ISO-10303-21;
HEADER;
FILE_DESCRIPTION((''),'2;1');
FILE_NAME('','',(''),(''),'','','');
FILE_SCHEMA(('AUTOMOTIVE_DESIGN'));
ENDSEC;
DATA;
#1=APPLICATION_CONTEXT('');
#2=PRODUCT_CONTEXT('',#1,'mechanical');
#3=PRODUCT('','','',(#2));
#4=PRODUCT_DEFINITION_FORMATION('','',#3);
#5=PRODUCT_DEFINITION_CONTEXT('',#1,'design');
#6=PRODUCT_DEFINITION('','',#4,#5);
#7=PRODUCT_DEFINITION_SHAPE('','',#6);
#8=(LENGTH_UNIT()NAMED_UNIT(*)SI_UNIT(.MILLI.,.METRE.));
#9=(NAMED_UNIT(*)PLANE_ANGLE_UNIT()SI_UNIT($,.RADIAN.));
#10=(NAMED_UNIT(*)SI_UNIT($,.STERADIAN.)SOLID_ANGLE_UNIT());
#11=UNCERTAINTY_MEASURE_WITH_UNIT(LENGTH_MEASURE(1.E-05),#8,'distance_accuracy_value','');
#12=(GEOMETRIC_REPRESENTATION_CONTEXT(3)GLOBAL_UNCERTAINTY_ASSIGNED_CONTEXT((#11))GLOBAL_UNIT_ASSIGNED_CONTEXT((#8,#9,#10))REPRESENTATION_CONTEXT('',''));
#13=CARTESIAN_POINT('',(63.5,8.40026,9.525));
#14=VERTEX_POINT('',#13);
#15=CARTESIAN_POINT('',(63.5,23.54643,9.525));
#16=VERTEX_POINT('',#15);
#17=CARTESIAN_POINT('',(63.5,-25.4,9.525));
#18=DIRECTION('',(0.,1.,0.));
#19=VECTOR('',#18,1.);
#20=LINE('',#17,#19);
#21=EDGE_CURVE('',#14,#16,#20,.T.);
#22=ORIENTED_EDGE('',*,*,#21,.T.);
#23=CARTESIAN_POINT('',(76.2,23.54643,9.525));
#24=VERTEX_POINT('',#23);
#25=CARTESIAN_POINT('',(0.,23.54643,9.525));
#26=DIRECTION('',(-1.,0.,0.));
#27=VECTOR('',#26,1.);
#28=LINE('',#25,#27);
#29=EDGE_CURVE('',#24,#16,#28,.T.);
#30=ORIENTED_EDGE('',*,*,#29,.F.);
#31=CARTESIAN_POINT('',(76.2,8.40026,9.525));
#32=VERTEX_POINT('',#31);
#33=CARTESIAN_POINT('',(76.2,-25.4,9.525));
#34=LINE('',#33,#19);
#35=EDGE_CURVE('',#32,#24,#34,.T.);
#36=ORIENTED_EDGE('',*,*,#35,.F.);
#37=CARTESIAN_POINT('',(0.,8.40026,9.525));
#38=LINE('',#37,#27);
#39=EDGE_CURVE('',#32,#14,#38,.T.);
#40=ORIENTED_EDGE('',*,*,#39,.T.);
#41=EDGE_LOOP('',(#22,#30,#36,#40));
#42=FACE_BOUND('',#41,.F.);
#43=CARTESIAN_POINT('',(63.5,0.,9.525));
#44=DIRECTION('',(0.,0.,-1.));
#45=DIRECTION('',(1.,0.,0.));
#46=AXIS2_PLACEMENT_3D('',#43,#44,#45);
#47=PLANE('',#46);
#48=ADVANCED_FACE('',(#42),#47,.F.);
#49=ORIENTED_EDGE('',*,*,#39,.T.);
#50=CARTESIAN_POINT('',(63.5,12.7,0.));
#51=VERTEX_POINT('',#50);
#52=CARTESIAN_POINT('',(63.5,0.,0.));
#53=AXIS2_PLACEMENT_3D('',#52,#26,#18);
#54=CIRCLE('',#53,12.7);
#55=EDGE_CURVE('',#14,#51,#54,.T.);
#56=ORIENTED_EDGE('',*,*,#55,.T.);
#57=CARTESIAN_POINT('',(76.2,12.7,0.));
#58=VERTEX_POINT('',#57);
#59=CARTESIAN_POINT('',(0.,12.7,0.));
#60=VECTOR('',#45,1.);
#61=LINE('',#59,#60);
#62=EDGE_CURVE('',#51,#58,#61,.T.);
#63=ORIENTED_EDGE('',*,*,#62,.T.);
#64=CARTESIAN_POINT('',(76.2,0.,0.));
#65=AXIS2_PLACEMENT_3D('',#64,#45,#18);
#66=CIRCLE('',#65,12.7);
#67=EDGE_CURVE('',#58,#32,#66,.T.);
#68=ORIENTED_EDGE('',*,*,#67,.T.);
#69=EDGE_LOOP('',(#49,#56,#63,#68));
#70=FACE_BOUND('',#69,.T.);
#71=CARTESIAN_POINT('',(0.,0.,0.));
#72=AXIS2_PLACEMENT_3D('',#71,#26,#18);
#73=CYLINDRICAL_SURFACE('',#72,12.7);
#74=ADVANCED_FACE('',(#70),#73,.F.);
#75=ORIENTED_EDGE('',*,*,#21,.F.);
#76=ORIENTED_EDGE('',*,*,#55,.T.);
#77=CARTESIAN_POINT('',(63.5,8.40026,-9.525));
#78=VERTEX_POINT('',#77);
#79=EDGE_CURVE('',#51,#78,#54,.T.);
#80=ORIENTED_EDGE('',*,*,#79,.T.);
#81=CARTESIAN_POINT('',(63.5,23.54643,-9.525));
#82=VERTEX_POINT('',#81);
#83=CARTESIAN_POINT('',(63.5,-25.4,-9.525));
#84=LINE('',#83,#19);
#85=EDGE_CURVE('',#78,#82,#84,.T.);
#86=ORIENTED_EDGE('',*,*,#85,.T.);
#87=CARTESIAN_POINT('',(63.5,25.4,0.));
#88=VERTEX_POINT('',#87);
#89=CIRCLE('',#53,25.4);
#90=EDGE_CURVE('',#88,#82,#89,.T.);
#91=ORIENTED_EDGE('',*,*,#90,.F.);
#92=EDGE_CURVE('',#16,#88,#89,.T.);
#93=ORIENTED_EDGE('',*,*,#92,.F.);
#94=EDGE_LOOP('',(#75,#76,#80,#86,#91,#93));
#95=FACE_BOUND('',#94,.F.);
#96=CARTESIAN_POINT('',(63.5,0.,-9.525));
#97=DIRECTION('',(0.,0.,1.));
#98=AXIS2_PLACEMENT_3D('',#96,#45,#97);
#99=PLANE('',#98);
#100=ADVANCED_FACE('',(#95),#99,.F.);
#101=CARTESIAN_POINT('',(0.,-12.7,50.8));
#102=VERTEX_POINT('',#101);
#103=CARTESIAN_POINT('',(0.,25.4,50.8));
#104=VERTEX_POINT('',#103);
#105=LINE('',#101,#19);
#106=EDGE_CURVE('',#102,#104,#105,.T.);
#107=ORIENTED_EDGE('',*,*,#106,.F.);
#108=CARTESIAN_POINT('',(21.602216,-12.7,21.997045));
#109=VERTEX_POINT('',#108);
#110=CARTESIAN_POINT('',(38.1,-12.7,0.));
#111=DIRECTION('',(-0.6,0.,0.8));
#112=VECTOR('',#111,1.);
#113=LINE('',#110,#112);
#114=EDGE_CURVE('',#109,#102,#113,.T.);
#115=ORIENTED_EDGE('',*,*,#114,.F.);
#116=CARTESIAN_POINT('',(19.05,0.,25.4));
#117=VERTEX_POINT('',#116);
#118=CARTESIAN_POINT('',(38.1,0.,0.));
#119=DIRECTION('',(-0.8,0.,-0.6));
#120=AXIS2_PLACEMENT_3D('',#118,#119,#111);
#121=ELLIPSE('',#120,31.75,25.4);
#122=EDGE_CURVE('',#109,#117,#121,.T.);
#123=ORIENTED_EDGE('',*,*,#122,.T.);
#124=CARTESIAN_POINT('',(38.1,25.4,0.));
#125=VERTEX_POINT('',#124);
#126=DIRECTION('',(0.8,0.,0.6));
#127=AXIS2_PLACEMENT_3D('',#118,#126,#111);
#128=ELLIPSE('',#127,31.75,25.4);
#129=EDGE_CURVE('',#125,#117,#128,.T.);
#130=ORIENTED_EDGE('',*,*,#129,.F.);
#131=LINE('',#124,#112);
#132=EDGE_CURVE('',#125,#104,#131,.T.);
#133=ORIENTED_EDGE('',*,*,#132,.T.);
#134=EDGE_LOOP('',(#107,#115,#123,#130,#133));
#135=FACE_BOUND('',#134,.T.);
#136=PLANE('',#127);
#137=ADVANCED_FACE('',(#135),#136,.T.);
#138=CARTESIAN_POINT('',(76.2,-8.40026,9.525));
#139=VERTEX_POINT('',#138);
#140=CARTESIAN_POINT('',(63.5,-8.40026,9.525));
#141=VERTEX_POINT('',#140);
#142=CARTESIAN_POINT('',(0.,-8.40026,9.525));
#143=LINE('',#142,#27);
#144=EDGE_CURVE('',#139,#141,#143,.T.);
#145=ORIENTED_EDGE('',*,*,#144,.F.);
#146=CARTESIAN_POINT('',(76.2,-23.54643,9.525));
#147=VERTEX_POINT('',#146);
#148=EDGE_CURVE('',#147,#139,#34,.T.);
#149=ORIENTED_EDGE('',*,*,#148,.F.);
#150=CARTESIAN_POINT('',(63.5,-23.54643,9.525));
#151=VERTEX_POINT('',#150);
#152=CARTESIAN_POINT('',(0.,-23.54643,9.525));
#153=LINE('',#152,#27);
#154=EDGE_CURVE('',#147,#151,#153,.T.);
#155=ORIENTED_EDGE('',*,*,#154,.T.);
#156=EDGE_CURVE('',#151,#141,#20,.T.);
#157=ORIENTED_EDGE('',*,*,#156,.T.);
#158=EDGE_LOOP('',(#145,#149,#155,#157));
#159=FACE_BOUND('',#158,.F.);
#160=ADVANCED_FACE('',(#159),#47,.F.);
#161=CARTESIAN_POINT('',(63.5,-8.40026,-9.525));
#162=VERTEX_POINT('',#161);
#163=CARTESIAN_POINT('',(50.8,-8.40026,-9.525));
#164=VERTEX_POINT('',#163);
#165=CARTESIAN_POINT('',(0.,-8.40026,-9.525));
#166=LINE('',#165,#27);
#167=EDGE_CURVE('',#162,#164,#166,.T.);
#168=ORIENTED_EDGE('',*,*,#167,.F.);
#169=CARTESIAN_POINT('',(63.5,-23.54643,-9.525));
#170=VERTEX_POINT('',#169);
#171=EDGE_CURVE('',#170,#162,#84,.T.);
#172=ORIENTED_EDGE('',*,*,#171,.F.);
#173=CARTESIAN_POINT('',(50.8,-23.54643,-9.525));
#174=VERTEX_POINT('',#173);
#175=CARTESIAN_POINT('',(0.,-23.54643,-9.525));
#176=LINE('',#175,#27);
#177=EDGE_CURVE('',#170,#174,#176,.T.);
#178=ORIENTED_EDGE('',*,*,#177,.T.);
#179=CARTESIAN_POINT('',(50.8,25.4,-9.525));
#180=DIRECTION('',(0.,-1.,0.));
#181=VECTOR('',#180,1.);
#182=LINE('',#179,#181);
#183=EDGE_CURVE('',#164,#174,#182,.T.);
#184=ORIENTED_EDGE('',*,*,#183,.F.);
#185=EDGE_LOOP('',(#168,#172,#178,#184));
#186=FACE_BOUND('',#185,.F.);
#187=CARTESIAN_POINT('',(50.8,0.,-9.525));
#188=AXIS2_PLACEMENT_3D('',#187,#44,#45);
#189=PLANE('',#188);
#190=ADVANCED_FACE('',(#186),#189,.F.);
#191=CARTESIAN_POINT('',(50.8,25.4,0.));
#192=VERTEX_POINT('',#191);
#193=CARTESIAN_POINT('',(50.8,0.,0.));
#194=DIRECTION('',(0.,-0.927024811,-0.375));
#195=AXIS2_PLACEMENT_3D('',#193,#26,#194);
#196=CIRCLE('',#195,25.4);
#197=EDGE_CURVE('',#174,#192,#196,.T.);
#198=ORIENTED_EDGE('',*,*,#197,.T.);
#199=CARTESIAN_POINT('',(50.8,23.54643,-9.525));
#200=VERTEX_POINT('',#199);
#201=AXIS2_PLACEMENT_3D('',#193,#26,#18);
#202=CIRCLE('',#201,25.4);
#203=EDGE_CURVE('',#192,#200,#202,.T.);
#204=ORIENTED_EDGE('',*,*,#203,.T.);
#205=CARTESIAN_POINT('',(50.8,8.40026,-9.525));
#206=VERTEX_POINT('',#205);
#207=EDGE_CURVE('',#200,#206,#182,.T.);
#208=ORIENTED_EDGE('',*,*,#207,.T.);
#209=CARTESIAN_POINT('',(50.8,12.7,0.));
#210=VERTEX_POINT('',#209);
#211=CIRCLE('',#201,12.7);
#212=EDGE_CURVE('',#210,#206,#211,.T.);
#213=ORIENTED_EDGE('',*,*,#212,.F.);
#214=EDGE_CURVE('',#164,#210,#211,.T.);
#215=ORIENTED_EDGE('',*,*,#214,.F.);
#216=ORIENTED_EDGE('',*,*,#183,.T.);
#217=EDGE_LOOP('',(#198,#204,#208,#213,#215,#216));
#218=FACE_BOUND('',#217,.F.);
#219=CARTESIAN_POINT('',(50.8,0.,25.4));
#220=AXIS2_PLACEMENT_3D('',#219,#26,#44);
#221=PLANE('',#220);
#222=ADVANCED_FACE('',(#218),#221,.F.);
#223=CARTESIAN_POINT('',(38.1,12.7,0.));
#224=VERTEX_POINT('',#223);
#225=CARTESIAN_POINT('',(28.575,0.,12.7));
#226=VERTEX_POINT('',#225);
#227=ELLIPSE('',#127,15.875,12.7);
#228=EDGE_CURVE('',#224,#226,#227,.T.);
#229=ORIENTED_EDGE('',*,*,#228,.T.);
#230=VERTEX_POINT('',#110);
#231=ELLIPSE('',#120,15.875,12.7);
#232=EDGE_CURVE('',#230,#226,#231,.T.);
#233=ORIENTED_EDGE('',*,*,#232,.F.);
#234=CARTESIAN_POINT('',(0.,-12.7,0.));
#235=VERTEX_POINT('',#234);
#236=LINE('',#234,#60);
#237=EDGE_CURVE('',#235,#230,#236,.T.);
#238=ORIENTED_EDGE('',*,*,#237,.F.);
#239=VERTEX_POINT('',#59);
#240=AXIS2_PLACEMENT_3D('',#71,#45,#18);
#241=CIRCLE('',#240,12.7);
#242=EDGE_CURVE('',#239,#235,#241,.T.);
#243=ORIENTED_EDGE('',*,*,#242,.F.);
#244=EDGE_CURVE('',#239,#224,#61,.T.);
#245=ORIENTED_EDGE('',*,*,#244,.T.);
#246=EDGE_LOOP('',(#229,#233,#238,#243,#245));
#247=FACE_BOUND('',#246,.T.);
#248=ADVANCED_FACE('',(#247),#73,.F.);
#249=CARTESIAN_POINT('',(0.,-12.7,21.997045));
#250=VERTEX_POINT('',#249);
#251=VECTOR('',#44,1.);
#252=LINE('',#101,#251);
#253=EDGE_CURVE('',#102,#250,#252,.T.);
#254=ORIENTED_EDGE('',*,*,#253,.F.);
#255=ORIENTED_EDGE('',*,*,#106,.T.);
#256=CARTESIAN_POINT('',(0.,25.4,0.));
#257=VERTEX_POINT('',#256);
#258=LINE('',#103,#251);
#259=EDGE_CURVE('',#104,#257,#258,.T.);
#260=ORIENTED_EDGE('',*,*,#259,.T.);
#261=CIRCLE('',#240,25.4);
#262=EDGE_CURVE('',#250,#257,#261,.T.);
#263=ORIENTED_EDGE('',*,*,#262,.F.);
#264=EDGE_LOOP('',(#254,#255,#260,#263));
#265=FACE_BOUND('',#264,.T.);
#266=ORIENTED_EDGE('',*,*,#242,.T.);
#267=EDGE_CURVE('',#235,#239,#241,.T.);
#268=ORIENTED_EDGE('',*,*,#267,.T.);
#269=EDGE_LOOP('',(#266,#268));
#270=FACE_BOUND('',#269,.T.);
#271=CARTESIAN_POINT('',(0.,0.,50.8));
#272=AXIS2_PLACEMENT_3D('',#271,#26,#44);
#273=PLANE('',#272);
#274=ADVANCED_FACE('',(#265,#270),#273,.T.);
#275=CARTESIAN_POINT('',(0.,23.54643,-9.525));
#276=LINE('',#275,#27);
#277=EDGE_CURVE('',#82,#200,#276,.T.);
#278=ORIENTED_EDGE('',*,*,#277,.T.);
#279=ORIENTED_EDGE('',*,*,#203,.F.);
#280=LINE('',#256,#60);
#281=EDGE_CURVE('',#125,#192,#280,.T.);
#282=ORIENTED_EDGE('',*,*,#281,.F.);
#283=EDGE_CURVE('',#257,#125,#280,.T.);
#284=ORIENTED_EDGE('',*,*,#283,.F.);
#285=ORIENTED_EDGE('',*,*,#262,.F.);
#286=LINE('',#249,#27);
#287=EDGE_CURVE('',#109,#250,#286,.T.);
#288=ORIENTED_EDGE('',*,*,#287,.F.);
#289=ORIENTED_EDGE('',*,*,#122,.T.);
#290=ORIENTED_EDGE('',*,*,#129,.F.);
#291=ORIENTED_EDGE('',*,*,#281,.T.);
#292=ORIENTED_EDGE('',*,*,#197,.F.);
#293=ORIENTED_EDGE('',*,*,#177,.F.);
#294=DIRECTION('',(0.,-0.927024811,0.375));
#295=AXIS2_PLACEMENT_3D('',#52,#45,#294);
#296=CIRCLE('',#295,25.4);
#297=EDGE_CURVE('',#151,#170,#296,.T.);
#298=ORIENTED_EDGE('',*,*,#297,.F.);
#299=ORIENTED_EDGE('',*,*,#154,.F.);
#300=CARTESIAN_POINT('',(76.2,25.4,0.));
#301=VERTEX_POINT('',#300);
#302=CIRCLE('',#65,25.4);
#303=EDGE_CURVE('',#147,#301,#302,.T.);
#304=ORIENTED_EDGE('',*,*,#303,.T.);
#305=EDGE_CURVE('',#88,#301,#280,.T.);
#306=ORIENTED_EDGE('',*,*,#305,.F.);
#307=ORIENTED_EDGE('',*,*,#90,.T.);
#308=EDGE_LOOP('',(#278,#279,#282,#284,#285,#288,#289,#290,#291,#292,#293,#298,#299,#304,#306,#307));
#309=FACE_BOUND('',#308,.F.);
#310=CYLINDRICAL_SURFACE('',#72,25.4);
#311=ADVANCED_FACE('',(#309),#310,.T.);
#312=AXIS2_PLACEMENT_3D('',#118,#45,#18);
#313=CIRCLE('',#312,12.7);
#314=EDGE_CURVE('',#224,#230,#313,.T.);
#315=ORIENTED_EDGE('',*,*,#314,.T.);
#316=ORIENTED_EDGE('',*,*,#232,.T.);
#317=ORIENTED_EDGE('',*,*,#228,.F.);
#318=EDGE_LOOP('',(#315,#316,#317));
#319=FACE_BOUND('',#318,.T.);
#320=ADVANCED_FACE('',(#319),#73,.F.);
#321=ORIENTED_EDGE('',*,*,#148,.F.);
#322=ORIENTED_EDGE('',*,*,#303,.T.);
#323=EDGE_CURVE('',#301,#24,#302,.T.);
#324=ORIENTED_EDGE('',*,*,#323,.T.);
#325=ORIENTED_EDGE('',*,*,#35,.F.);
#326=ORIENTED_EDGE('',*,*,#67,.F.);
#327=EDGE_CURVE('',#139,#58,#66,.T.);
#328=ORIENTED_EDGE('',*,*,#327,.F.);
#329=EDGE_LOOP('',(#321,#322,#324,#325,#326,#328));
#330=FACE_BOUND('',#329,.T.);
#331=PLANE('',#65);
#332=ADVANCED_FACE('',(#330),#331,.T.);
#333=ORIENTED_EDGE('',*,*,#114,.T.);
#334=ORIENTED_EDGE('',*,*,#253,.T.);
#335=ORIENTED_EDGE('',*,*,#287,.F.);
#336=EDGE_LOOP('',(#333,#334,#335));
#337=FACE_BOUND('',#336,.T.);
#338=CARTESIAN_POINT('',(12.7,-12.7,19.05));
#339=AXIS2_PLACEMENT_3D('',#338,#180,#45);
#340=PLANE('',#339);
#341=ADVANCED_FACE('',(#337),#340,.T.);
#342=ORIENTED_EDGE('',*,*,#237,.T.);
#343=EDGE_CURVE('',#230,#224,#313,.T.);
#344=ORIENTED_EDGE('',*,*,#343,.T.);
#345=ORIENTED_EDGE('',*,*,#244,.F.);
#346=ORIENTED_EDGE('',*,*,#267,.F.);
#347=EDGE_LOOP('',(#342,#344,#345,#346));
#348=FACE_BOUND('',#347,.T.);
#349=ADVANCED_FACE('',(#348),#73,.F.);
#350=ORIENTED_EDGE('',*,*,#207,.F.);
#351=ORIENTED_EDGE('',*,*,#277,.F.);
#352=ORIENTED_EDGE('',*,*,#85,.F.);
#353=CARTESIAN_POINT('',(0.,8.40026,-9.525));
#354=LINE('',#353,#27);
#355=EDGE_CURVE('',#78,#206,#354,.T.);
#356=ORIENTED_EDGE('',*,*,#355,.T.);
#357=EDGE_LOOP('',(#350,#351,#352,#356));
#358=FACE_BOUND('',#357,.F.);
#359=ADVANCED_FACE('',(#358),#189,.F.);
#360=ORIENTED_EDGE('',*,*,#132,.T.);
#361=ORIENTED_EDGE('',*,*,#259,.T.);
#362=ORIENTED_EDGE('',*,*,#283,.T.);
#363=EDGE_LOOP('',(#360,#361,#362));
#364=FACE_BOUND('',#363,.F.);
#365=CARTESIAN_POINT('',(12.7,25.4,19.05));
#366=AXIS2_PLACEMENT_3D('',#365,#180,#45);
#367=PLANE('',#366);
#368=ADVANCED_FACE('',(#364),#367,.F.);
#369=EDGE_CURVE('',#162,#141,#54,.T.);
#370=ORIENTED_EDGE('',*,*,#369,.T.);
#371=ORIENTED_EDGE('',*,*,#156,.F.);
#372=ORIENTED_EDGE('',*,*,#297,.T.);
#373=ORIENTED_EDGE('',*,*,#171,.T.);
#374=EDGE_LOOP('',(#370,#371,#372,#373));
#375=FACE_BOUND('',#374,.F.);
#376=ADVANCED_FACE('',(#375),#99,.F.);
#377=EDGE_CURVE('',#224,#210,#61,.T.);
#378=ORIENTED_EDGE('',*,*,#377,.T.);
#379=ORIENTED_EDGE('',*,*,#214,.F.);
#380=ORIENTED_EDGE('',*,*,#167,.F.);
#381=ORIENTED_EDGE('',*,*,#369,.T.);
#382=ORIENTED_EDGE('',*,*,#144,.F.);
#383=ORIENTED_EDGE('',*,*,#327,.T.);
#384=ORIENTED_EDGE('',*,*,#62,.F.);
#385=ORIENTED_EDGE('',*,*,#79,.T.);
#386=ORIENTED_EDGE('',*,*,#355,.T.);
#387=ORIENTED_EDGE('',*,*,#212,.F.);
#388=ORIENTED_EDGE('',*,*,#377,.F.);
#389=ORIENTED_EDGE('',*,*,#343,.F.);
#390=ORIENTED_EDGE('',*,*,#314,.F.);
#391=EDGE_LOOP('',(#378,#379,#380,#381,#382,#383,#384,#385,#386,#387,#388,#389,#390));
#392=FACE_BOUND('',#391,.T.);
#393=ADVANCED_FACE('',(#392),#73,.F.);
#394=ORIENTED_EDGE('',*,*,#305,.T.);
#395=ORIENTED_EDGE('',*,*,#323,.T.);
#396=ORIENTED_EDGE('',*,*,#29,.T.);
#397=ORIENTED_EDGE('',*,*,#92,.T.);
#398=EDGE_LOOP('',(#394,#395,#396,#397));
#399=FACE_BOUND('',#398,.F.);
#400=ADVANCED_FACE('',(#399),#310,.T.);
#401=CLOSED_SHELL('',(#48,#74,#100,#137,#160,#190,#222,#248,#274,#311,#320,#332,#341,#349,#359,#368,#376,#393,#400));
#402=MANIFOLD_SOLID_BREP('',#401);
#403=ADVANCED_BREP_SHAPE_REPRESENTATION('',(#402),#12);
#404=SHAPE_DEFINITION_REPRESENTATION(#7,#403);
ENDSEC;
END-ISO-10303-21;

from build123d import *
from build123d import SkipClean  # not in build123d's __all__

# Parameters (mm, degrees)
F0_R          = 25.4
F0_R_2        = 12.7
F1_DEPTH      = 76.2
F3_DEPTH      = 25.4
F5_DEPTH      = 12.7
F5_DEPTH_BACK = 25.4
F6_R          = 12.7
F7_DEPTH      = 38.1


with BuildPart() as f1:
    # F0 (on Right) → F1 (new body)
    with BuildSketch(Plane.YZ):
        Circle(F0_R)
        Circle(F0_R_2, mode=Mode.SUBTRACT)
    extrude(amount=F1_DEPTH)

    # F2 (on Front) → F3 (cut, symmetric)
    with BuildSketch(Plane.XZ):
        Polygon((76.2, 9.525), (76.2, 25.4), (50.8, 25.4), (50.8, -9.525), (63.5, -9.525), (63.5, 9.525), align=None)
    extrude(amount=F3_DEPTH, both=True, mode=Mode.SUBTRACT)

    # F4 (on Front) → F5 (join, two sides)
    with BuildSketch(Plane.XZ) as f5_sk:
        Polygon((0, 50.8), (0, 0), (38.1, 0), align=None)
    extrude(amount=F5_DEPTH)
    extrude(f5_sk.sketch, amount=-F5_DEPTH_BACK)

    # F6 (on Right) → F7 (cut)
    with BuildSketch(Plane.YZ):
        Circle(F6_R)
    with SkipClean():  # cleaning this boolean's faces spoils the solid; the shape is the same uncleaned
        extrude(amount=F7_DEPTH, mode=Mode.SUBTRACT)


solid = f1.part
